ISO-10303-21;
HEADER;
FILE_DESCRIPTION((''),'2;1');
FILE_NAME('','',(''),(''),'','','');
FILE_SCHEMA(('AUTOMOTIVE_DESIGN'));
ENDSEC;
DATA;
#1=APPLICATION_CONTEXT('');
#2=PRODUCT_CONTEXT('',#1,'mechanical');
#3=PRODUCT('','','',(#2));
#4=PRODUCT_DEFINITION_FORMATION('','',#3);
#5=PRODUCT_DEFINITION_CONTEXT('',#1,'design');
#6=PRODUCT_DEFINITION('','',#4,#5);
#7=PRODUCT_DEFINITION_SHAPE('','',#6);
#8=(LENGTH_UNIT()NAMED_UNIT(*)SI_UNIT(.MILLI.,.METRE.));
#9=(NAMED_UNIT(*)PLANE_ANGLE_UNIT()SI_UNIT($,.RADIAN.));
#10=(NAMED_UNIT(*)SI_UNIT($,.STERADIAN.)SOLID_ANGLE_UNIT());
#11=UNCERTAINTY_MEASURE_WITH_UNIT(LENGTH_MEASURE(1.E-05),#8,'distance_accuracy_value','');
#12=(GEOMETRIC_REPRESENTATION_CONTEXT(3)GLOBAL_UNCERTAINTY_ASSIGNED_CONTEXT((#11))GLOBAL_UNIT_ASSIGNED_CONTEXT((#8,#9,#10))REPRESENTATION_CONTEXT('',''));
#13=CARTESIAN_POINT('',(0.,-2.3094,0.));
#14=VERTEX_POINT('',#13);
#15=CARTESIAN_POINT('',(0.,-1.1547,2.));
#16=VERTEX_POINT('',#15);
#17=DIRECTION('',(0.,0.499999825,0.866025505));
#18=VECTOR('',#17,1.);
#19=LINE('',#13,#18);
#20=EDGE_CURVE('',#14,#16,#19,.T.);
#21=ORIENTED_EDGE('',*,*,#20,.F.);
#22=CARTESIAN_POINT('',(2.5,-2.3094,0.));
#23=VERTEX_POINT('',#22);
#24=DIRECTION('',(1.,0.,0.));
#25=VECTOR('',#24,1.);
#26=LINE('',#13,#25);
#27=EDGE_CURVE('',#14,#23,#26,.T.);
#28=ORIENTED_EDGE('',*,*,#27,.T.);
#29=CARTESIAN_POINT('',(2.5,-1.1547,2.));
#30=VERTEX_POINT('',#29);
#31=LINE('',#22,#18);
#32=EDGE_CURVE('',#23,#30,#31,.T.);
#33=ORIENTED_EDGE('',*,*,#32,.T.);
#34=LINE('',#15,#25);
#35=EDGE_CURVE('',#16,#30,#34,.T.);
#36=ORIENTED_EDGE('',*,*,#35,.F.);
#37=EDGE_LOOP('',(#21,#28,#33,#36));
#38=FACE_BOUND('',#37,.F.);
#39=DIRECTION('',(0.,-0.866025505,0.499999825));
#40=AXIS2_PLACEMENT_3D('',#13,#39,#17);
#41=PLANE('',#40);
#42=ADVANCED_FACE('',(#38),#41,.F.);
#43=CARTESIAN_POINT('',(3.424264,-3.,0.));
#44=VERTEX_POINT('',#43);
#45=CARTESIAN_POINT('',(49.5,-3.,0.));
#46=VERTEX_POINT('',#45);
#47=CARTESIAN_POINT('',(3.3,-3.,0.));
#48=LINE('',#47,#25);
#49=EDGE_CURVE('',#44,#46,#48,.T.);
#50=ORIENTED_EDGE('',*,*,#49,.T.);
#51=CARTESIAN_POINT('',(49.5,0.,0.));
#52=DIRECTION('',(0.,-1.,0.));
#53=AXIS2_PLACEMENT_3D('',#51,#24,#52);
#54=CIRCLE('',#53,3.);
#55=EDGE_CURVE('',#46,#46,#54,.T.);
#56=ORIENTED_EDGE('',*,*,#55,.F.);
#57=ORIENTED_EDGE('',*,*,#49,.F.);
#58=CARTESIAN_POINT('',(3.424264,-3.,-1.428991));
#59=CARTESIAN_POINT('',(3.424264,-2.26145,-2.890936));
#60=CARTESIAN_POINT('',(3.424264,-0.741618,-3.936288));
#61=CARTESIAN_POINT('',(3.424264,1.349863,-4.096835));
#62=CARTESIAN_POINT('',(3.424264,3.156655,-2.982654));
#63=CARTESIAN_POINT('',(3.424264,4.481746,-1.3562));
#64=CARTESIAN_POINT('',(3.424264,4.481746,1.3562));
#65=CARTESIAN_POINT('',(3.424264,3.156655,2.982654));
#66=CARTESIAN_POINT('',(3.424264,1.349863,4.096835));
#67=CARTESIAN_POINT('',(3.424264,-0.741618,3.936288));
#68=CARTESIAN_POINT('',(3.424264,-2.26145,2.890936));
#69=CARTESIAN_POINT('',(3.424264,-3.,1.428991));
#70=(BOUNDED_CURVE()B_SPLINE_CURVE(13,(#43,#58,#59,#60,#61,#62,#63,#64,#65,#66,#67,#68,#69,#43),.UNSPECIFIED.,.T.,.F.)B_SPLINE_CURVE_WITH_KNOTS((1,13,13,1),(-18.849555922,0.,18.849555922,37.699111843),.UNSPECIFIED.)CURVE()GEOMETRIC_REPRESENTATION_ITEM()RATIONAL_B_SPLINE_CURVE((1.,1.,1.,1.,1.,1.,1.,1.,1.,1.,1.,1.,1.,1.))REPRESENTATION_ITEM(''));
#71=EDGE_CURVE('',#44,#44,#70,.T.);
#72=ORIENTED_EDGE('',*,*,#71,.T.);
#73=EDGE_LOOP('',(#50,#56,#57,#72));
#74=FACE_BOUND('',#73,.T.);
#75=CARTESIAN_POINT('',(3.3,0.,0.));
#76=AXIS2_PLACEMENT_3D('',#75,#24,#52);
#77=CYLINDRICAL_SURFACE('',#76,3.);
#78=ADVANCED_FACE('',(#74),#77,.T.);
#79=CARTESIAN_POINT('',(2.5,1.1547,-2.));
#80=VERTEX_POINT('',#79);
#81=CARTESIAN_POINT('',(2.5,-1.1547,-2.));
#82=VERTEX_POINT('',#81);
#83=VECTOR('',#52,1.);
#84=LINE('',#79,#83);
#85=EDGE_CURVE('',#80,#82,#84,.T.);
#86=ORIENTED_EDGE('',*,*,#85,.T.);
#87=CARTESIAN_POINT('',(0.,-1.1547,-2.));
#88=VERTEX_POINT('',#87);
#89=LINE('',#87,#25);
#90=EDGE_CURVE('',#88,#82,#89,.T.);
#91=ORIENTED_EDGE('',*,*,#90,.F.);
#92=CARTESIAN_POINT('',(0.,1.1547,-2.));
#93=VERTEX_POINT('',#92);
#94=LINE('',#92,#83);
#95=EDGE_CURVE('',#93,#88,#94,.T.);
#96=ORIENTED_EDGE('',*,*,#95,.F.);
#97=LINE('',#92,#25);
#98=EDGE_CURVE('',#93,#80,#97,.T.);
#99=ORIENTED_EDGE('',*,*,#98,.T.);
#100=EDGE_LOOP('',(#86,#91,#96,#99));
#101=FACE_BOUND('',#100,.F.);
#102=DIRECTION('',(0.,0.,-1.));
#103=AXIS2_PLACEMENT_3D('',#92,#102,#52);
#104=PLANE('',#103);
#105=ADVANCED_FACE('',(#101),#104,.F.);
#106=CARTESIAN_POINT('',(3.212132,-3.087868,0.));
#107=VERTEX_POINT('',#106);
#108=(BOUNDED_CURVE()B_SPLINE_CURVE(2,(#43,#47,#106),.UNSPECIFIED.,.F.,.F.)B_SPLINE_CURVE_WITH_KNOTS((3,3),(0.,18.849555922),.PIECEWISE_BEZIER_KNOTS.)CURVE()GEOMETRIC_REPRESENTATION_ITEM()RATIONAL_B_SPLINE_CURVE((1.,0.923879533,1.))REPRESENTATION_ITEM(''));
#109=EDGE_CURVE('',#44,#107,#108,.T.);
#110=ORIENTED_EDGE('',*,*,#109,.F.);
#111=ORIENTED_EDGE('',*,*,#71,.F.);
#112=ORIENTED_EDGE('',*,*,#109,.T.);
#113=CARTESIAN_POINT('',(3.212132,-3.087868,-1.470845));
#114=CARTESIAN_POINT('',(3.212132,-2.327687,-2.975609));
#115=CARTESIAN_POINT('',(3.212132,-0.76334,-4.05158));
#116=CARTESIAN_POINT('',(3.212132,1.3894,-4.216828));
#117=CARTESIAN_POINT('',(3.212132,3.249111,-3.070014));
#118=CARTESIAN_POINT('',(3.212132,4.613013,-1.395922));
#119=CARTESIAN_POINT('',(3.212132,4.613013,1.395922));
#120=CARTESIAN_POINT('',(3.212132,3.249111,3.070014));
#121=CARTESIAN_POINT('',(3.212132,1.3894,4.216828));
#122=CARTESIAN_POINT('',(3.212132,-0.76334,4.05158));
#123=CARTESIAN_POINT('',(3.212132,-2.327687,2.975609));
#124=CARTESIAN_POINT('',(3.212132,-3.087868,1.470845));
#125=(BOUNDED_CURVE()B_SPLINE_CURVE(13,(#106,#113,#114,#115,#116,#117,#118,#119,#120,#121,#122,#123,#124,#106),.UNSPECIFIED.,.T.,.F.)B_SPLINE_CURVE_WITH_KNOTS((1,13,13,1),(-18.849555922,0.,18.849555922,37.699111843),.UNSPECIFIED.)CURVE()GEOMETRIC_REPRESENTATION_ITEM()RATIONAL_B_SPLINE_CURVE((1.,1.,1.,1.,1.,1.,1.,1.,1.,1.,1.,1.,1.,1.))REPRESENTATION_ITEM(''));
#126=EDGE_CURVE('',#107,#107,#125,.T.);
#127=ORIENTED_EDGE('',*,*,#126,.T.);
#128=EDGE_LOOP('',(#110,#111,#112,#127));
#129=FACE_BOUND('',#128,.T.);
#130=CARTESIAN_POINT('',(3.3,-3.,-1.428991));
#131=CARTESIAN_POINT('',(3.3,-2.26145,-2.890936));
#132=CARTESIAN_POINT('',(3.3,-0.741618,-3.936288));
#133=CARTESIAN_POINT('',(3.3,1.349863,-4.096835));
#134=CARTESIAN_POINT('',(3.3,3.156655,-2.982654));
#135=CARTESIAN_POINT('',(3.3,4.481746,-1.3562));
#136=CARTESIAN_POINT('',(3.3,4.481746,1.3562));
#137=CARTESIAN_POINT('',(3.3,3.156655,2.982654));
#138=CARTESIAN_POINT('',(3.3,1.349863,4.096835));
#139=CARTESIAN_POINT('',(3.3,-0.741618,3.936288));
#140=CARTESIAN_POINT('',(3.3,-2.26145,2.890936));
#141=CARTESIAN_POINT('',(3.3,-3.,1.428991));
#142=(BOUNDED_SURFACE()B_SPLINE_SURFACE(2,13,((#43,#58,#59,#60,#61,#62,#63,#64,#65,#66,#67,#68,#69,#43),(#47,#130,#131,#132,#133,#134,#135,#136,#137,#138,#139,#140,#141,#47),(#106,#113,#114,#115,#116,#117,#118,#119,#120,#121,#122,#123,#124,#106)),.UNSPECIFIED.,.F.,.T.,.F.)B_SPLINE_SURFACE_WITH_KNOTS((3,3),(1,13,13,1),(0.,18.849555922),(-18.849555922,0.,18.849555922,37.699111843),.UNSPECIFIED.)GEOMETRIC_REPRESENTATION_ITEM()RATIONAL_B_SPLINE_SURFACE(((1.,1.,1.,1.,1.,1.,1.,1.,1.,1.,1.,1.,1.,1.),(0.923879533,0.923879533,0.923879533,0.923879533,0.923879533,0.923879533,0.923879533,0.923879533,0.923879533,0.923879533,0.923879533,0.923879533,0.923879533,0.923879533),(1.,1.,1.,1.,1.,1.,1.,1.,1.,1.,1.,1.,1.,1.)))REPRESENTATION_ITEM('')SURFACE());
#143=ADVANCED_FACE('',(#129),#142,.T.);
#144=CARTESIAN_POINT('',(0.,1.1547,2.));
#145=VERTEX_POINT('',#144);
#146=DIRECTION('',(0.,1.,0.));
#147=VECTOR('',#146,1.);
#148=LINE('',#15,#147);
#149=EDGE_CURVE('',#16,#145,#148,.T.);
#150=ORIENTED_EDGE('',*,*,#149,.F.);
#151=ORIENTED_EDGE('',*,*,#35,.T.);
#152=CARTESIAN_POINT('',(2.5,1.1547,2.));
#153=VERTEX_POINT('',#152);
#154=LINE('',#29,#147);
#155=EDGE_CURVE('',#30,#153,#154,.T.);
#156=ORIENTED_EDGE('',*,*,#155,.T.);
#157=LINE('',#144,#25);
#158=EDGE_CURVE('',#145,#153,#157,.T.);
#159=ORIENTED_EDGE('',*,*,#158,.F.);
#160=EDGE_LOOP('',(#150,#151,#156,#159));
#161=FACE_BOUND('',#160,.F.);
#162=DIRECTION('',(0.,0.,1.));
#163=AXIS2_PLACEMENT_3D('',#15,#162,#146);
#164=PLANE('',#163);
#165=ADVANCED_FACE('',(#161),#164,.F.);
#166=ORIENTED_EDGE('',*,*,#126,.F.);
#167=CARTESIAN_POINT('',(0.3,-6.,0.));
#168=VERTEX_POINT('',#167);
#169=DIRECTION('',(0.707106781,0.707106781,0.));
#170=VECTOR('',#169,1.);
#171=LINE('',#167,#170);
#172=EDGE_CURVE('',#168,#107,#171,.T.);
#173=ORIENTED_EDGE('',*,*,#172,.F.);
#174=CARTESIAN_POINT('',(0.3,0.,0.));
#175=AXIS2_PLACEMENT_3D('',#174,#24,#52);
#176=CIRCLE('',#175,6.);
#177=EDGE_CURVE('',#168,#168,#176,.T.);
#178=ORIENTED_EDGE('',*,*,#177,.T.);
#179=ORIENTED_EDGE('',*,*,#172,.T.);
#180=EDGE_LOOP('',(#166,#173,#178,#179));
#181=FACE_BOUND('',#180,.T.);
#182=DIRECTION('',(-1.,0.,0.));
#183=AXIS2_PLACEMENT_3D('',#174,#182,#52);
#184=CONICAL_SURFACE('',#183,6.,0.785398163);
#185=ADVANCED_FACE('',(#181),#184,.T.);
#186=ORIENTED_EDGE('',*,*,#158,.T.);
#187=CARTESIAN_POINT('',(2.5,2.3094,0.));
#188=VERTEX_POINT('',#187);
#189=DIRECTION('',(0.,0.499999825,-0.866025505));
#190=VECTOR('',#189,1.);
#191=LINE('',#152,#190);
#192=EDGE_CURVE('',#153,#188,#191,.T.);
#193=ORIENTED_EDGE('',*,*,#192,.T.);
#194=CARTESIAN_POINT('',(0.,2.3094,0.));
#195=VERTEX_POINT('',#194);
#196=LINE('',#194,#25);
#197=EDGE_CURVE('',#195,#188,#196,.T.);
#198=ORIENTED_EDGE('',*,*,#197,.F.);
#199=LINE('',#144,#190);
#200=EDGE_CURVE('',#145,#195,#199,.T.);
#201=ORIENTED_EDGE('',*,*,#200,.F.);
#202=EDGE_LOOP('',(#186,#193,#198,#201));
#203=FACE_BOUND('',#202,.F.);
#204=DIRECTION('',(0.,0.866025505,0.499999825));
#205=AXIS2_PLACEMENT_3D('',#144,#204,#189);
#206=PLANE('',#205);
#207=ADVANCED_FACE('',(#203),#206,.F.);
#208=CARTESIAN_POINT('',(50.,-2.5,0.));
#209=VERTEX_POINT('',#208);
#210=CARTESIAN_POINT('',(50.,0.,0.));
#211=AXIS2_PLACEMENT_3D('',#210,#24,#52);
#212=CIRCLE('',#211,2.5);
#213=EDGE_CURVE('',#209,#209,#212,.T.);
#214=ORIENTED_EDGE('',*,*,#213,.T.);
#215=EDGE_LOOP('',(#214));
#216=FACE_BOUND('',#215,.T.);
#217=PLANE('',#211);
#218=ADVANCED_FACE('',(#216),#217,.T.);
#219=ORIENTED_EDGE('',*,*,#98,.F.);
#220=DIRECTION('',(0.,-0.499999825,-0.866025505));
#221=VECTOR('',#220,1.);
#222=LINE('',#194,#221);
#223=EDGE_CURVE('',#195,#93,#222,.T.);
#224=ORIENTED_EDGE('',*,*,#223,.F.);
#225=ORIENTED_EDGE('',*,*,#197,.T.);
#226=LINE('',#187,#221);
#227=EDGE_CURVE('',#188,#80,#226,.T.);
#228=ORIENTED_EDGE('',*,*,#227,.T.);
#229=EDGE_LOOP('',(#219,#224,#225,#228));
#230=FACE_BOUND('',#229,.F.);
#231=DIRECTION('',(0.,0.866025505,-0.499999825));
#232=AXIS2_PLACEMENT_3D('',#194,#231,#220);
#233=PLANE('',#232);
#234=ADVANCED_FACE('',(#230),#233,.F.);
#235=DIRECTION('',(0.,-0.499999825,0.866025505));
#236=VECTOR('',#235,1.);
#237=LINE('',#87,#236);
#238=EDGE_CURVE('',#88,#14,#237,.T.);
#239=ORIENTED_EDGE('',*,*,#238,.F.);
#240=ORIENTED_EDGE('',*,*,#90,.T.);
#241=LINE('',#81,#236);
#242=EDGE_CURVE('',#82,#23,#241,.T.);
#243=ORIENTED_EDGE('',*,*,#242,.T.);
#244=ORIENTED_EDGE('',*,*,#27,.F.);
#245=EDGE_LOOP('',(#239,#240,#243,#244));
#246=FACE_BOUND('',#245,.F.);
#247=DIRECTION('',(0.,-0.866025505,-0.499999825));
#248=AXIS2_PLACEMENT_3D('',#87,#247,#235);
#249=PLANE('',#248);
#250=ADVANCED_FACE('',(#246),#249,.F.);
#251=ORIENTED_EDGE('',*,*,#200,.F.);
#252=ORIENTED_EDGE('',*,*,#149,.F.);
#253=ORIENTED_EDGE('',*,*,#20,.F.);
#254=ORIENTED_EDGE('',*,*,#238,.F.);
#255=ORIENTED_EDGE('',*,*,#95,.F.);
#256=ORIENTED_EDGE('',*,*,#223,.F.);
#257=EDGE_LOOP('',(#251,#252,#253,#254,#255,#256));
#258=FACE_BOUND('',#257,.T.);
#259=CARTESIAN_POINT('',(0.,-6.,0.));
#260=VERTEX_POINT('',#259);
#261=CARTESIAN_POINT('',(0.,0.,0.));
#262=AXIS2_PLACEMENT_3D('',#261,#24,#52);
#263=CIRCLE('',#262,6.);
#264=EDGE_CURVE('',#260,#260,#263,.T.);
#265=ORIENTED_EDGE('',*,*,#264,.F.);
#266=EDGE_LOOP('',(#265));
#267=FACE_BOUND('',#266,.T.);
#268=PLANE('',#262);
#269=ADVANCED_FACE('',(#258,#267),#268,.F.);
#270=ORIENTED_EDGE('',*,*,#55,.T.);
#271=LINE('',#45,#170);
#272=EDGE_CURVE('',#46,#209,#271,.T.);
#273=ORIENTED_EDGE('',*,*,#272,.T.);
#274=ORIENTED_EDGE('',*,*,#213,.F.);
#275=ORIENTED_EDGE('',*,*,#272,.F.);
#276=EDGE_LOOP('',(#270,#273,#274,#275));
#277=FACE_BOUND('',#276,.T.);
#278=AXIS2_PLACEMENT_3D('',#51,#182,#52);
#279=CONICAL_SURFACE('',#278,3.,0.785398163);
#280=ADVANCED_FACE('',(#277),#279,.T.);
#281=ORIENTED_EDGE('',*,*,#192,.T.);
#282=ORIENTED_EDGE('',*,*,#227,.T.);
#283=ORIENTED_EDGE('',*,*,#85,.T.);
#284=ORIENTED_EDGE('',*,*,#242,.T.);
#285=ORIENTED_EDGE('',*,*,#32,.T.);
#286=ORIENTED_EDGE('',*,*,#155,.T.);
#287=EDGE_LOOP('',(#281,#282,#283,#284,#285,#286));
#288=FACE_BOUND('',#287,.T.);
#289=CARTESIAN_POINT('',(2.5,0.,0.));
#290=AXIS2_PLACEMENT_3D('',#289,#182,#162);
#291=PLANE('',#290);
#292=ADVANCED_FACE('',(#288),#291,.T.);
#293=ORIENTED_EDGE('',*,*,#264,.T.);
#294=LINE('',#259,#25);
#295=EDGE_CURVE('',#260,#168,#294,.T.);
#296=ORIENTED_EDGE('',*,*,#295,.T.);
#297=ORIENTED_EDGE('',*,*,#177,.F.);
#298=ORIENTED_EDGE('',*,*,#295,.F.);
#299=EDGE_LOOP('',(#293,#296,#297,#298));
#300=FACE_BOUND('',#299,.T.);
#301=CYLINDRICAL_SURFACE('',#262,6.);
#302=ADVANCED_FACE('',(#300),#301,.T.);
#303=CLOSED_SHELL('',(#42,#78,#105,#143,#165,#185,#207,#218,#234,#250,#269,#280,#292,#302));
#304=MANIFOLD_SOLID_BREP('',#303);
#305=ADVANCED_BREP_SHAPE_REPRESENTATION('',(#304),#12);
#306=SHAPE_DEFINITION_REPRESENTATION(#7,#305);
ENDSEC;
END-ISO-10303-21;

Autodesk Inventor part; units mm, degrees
ref_plane "YZ Plane" through (0, 0, 0) normal (1, 0, 0) x (0, 1, 0)
sketch "Skizze1" plane through (0, 0, 0) normal (0, 1, 0) x (-1, 0, 0)
  point P0 (0, 0)
sketch "Skizze2" plane through (0, 0, 0) normal (0, 0, 1) x (-1, 0, 0)
  line L0 (-50, 3) -> (-50, 0)
  line L1 (-3.3, 3) -> (-50, 3)
  line L2 (-0.3, 6) -> (-3.3, 3)
  line L3 (0, 6) -> (-0.3, 6)
  line L4 (0, 0) -> (0, 6)
  line L5 (-50, 0) -> (0, 0)
  line L6 (-50, 0) -> (0, 0)
  line L7 (0, -9.6) -> (0, 1.6) projected
  line L8 (10, 0) -> (-60, 0) projected
  dimension "ParC" = 0.3
  dimension "d43" = 45
  dimension "d44" = 6
  dimension "d45" = 3
  dimension "d46" = 50
  dimension "d47" = 0
  dimension "d48" = 0
revolve "Drehung1" add sketch "Skizze2" angle 360 about axis through (50, 0, 0) along (1, 0, 0)
sketch "Skizze3" plane through (0, 0, 0) normal (-1, 0, 0) x (0, 0, 1)
  line L0 (-2, 1.1547) -> (-2, -1.1547)
  line L1 (0, 2.3094) -> (-2, 1.1547)
  line L2 (2, 1.1547) -> (0, 2.3094)
  line L3 (2, -1.1547) -> (2, 1.1547)
  line L4 (0, -2.3094) -> (2, -1.1547)
  line L5 (-2, -1.1547) -> (0, -2.3094)
  circle A0 centre (0, 0) radius 2 construction
  circle A1 centre (0, 0) radius 3 construction
  dimension "d11" = 4
  dimension "d13" = 120
  dimension "d15" = 120
extrude "Extrusion1" cut sketch "Skizze3" against normal blind 2.5
fillet "Rundung1" radius 0.3 1 edges at (3.3, 3, 0)
chamfer "Fase1" distance 0.5 angle 45 1 edges at (50, 3, 0) measured on face at (34.4748, -2.4612, -1.7154)
thread "Gewinde1" size "M6x1" class "6g" standard "ISO Metric profile" length 18
ref_plane "MSC_PF1" through (0, 0, 0) normal (1, 0, 0) x (0, 1, 0)
ref_plane "MSC_PT1" through (0, 0, 0) normal (1, 0, 0) x (0, 1, 0)
equation "\"d43\" = 0.5 * ang"
equation "\"d44\" = 0.5 * dk"
equation "\"d45\" = 0.5 * NND"
equation "\"d46\" = NLG"
equation "\"d11\" = ParS"
equation "\"d16\" = ParT"
equation "\"d18\" = r"
equation "\"d19\" = 0.5 * PTC"
equation "\"d39\" = 0.5 * PTC"
equation "\"NND\" = 6"
equation "\"PTC\" = 1"
equation "\"dk\" = 12"
equation "\"ParK\" = 3.3"
equation "\"ParS\" = 4"
equation "\"ParT\" = 2.5"
equation "\"r\" = 0.3"
equation "\"NLG\" = 50"
equation "\"ang\" = 90deg"
equation "\"THREADDIA\" = NND"
properties part number "ISO 10642 - M6 x  50" material "Stahl"
